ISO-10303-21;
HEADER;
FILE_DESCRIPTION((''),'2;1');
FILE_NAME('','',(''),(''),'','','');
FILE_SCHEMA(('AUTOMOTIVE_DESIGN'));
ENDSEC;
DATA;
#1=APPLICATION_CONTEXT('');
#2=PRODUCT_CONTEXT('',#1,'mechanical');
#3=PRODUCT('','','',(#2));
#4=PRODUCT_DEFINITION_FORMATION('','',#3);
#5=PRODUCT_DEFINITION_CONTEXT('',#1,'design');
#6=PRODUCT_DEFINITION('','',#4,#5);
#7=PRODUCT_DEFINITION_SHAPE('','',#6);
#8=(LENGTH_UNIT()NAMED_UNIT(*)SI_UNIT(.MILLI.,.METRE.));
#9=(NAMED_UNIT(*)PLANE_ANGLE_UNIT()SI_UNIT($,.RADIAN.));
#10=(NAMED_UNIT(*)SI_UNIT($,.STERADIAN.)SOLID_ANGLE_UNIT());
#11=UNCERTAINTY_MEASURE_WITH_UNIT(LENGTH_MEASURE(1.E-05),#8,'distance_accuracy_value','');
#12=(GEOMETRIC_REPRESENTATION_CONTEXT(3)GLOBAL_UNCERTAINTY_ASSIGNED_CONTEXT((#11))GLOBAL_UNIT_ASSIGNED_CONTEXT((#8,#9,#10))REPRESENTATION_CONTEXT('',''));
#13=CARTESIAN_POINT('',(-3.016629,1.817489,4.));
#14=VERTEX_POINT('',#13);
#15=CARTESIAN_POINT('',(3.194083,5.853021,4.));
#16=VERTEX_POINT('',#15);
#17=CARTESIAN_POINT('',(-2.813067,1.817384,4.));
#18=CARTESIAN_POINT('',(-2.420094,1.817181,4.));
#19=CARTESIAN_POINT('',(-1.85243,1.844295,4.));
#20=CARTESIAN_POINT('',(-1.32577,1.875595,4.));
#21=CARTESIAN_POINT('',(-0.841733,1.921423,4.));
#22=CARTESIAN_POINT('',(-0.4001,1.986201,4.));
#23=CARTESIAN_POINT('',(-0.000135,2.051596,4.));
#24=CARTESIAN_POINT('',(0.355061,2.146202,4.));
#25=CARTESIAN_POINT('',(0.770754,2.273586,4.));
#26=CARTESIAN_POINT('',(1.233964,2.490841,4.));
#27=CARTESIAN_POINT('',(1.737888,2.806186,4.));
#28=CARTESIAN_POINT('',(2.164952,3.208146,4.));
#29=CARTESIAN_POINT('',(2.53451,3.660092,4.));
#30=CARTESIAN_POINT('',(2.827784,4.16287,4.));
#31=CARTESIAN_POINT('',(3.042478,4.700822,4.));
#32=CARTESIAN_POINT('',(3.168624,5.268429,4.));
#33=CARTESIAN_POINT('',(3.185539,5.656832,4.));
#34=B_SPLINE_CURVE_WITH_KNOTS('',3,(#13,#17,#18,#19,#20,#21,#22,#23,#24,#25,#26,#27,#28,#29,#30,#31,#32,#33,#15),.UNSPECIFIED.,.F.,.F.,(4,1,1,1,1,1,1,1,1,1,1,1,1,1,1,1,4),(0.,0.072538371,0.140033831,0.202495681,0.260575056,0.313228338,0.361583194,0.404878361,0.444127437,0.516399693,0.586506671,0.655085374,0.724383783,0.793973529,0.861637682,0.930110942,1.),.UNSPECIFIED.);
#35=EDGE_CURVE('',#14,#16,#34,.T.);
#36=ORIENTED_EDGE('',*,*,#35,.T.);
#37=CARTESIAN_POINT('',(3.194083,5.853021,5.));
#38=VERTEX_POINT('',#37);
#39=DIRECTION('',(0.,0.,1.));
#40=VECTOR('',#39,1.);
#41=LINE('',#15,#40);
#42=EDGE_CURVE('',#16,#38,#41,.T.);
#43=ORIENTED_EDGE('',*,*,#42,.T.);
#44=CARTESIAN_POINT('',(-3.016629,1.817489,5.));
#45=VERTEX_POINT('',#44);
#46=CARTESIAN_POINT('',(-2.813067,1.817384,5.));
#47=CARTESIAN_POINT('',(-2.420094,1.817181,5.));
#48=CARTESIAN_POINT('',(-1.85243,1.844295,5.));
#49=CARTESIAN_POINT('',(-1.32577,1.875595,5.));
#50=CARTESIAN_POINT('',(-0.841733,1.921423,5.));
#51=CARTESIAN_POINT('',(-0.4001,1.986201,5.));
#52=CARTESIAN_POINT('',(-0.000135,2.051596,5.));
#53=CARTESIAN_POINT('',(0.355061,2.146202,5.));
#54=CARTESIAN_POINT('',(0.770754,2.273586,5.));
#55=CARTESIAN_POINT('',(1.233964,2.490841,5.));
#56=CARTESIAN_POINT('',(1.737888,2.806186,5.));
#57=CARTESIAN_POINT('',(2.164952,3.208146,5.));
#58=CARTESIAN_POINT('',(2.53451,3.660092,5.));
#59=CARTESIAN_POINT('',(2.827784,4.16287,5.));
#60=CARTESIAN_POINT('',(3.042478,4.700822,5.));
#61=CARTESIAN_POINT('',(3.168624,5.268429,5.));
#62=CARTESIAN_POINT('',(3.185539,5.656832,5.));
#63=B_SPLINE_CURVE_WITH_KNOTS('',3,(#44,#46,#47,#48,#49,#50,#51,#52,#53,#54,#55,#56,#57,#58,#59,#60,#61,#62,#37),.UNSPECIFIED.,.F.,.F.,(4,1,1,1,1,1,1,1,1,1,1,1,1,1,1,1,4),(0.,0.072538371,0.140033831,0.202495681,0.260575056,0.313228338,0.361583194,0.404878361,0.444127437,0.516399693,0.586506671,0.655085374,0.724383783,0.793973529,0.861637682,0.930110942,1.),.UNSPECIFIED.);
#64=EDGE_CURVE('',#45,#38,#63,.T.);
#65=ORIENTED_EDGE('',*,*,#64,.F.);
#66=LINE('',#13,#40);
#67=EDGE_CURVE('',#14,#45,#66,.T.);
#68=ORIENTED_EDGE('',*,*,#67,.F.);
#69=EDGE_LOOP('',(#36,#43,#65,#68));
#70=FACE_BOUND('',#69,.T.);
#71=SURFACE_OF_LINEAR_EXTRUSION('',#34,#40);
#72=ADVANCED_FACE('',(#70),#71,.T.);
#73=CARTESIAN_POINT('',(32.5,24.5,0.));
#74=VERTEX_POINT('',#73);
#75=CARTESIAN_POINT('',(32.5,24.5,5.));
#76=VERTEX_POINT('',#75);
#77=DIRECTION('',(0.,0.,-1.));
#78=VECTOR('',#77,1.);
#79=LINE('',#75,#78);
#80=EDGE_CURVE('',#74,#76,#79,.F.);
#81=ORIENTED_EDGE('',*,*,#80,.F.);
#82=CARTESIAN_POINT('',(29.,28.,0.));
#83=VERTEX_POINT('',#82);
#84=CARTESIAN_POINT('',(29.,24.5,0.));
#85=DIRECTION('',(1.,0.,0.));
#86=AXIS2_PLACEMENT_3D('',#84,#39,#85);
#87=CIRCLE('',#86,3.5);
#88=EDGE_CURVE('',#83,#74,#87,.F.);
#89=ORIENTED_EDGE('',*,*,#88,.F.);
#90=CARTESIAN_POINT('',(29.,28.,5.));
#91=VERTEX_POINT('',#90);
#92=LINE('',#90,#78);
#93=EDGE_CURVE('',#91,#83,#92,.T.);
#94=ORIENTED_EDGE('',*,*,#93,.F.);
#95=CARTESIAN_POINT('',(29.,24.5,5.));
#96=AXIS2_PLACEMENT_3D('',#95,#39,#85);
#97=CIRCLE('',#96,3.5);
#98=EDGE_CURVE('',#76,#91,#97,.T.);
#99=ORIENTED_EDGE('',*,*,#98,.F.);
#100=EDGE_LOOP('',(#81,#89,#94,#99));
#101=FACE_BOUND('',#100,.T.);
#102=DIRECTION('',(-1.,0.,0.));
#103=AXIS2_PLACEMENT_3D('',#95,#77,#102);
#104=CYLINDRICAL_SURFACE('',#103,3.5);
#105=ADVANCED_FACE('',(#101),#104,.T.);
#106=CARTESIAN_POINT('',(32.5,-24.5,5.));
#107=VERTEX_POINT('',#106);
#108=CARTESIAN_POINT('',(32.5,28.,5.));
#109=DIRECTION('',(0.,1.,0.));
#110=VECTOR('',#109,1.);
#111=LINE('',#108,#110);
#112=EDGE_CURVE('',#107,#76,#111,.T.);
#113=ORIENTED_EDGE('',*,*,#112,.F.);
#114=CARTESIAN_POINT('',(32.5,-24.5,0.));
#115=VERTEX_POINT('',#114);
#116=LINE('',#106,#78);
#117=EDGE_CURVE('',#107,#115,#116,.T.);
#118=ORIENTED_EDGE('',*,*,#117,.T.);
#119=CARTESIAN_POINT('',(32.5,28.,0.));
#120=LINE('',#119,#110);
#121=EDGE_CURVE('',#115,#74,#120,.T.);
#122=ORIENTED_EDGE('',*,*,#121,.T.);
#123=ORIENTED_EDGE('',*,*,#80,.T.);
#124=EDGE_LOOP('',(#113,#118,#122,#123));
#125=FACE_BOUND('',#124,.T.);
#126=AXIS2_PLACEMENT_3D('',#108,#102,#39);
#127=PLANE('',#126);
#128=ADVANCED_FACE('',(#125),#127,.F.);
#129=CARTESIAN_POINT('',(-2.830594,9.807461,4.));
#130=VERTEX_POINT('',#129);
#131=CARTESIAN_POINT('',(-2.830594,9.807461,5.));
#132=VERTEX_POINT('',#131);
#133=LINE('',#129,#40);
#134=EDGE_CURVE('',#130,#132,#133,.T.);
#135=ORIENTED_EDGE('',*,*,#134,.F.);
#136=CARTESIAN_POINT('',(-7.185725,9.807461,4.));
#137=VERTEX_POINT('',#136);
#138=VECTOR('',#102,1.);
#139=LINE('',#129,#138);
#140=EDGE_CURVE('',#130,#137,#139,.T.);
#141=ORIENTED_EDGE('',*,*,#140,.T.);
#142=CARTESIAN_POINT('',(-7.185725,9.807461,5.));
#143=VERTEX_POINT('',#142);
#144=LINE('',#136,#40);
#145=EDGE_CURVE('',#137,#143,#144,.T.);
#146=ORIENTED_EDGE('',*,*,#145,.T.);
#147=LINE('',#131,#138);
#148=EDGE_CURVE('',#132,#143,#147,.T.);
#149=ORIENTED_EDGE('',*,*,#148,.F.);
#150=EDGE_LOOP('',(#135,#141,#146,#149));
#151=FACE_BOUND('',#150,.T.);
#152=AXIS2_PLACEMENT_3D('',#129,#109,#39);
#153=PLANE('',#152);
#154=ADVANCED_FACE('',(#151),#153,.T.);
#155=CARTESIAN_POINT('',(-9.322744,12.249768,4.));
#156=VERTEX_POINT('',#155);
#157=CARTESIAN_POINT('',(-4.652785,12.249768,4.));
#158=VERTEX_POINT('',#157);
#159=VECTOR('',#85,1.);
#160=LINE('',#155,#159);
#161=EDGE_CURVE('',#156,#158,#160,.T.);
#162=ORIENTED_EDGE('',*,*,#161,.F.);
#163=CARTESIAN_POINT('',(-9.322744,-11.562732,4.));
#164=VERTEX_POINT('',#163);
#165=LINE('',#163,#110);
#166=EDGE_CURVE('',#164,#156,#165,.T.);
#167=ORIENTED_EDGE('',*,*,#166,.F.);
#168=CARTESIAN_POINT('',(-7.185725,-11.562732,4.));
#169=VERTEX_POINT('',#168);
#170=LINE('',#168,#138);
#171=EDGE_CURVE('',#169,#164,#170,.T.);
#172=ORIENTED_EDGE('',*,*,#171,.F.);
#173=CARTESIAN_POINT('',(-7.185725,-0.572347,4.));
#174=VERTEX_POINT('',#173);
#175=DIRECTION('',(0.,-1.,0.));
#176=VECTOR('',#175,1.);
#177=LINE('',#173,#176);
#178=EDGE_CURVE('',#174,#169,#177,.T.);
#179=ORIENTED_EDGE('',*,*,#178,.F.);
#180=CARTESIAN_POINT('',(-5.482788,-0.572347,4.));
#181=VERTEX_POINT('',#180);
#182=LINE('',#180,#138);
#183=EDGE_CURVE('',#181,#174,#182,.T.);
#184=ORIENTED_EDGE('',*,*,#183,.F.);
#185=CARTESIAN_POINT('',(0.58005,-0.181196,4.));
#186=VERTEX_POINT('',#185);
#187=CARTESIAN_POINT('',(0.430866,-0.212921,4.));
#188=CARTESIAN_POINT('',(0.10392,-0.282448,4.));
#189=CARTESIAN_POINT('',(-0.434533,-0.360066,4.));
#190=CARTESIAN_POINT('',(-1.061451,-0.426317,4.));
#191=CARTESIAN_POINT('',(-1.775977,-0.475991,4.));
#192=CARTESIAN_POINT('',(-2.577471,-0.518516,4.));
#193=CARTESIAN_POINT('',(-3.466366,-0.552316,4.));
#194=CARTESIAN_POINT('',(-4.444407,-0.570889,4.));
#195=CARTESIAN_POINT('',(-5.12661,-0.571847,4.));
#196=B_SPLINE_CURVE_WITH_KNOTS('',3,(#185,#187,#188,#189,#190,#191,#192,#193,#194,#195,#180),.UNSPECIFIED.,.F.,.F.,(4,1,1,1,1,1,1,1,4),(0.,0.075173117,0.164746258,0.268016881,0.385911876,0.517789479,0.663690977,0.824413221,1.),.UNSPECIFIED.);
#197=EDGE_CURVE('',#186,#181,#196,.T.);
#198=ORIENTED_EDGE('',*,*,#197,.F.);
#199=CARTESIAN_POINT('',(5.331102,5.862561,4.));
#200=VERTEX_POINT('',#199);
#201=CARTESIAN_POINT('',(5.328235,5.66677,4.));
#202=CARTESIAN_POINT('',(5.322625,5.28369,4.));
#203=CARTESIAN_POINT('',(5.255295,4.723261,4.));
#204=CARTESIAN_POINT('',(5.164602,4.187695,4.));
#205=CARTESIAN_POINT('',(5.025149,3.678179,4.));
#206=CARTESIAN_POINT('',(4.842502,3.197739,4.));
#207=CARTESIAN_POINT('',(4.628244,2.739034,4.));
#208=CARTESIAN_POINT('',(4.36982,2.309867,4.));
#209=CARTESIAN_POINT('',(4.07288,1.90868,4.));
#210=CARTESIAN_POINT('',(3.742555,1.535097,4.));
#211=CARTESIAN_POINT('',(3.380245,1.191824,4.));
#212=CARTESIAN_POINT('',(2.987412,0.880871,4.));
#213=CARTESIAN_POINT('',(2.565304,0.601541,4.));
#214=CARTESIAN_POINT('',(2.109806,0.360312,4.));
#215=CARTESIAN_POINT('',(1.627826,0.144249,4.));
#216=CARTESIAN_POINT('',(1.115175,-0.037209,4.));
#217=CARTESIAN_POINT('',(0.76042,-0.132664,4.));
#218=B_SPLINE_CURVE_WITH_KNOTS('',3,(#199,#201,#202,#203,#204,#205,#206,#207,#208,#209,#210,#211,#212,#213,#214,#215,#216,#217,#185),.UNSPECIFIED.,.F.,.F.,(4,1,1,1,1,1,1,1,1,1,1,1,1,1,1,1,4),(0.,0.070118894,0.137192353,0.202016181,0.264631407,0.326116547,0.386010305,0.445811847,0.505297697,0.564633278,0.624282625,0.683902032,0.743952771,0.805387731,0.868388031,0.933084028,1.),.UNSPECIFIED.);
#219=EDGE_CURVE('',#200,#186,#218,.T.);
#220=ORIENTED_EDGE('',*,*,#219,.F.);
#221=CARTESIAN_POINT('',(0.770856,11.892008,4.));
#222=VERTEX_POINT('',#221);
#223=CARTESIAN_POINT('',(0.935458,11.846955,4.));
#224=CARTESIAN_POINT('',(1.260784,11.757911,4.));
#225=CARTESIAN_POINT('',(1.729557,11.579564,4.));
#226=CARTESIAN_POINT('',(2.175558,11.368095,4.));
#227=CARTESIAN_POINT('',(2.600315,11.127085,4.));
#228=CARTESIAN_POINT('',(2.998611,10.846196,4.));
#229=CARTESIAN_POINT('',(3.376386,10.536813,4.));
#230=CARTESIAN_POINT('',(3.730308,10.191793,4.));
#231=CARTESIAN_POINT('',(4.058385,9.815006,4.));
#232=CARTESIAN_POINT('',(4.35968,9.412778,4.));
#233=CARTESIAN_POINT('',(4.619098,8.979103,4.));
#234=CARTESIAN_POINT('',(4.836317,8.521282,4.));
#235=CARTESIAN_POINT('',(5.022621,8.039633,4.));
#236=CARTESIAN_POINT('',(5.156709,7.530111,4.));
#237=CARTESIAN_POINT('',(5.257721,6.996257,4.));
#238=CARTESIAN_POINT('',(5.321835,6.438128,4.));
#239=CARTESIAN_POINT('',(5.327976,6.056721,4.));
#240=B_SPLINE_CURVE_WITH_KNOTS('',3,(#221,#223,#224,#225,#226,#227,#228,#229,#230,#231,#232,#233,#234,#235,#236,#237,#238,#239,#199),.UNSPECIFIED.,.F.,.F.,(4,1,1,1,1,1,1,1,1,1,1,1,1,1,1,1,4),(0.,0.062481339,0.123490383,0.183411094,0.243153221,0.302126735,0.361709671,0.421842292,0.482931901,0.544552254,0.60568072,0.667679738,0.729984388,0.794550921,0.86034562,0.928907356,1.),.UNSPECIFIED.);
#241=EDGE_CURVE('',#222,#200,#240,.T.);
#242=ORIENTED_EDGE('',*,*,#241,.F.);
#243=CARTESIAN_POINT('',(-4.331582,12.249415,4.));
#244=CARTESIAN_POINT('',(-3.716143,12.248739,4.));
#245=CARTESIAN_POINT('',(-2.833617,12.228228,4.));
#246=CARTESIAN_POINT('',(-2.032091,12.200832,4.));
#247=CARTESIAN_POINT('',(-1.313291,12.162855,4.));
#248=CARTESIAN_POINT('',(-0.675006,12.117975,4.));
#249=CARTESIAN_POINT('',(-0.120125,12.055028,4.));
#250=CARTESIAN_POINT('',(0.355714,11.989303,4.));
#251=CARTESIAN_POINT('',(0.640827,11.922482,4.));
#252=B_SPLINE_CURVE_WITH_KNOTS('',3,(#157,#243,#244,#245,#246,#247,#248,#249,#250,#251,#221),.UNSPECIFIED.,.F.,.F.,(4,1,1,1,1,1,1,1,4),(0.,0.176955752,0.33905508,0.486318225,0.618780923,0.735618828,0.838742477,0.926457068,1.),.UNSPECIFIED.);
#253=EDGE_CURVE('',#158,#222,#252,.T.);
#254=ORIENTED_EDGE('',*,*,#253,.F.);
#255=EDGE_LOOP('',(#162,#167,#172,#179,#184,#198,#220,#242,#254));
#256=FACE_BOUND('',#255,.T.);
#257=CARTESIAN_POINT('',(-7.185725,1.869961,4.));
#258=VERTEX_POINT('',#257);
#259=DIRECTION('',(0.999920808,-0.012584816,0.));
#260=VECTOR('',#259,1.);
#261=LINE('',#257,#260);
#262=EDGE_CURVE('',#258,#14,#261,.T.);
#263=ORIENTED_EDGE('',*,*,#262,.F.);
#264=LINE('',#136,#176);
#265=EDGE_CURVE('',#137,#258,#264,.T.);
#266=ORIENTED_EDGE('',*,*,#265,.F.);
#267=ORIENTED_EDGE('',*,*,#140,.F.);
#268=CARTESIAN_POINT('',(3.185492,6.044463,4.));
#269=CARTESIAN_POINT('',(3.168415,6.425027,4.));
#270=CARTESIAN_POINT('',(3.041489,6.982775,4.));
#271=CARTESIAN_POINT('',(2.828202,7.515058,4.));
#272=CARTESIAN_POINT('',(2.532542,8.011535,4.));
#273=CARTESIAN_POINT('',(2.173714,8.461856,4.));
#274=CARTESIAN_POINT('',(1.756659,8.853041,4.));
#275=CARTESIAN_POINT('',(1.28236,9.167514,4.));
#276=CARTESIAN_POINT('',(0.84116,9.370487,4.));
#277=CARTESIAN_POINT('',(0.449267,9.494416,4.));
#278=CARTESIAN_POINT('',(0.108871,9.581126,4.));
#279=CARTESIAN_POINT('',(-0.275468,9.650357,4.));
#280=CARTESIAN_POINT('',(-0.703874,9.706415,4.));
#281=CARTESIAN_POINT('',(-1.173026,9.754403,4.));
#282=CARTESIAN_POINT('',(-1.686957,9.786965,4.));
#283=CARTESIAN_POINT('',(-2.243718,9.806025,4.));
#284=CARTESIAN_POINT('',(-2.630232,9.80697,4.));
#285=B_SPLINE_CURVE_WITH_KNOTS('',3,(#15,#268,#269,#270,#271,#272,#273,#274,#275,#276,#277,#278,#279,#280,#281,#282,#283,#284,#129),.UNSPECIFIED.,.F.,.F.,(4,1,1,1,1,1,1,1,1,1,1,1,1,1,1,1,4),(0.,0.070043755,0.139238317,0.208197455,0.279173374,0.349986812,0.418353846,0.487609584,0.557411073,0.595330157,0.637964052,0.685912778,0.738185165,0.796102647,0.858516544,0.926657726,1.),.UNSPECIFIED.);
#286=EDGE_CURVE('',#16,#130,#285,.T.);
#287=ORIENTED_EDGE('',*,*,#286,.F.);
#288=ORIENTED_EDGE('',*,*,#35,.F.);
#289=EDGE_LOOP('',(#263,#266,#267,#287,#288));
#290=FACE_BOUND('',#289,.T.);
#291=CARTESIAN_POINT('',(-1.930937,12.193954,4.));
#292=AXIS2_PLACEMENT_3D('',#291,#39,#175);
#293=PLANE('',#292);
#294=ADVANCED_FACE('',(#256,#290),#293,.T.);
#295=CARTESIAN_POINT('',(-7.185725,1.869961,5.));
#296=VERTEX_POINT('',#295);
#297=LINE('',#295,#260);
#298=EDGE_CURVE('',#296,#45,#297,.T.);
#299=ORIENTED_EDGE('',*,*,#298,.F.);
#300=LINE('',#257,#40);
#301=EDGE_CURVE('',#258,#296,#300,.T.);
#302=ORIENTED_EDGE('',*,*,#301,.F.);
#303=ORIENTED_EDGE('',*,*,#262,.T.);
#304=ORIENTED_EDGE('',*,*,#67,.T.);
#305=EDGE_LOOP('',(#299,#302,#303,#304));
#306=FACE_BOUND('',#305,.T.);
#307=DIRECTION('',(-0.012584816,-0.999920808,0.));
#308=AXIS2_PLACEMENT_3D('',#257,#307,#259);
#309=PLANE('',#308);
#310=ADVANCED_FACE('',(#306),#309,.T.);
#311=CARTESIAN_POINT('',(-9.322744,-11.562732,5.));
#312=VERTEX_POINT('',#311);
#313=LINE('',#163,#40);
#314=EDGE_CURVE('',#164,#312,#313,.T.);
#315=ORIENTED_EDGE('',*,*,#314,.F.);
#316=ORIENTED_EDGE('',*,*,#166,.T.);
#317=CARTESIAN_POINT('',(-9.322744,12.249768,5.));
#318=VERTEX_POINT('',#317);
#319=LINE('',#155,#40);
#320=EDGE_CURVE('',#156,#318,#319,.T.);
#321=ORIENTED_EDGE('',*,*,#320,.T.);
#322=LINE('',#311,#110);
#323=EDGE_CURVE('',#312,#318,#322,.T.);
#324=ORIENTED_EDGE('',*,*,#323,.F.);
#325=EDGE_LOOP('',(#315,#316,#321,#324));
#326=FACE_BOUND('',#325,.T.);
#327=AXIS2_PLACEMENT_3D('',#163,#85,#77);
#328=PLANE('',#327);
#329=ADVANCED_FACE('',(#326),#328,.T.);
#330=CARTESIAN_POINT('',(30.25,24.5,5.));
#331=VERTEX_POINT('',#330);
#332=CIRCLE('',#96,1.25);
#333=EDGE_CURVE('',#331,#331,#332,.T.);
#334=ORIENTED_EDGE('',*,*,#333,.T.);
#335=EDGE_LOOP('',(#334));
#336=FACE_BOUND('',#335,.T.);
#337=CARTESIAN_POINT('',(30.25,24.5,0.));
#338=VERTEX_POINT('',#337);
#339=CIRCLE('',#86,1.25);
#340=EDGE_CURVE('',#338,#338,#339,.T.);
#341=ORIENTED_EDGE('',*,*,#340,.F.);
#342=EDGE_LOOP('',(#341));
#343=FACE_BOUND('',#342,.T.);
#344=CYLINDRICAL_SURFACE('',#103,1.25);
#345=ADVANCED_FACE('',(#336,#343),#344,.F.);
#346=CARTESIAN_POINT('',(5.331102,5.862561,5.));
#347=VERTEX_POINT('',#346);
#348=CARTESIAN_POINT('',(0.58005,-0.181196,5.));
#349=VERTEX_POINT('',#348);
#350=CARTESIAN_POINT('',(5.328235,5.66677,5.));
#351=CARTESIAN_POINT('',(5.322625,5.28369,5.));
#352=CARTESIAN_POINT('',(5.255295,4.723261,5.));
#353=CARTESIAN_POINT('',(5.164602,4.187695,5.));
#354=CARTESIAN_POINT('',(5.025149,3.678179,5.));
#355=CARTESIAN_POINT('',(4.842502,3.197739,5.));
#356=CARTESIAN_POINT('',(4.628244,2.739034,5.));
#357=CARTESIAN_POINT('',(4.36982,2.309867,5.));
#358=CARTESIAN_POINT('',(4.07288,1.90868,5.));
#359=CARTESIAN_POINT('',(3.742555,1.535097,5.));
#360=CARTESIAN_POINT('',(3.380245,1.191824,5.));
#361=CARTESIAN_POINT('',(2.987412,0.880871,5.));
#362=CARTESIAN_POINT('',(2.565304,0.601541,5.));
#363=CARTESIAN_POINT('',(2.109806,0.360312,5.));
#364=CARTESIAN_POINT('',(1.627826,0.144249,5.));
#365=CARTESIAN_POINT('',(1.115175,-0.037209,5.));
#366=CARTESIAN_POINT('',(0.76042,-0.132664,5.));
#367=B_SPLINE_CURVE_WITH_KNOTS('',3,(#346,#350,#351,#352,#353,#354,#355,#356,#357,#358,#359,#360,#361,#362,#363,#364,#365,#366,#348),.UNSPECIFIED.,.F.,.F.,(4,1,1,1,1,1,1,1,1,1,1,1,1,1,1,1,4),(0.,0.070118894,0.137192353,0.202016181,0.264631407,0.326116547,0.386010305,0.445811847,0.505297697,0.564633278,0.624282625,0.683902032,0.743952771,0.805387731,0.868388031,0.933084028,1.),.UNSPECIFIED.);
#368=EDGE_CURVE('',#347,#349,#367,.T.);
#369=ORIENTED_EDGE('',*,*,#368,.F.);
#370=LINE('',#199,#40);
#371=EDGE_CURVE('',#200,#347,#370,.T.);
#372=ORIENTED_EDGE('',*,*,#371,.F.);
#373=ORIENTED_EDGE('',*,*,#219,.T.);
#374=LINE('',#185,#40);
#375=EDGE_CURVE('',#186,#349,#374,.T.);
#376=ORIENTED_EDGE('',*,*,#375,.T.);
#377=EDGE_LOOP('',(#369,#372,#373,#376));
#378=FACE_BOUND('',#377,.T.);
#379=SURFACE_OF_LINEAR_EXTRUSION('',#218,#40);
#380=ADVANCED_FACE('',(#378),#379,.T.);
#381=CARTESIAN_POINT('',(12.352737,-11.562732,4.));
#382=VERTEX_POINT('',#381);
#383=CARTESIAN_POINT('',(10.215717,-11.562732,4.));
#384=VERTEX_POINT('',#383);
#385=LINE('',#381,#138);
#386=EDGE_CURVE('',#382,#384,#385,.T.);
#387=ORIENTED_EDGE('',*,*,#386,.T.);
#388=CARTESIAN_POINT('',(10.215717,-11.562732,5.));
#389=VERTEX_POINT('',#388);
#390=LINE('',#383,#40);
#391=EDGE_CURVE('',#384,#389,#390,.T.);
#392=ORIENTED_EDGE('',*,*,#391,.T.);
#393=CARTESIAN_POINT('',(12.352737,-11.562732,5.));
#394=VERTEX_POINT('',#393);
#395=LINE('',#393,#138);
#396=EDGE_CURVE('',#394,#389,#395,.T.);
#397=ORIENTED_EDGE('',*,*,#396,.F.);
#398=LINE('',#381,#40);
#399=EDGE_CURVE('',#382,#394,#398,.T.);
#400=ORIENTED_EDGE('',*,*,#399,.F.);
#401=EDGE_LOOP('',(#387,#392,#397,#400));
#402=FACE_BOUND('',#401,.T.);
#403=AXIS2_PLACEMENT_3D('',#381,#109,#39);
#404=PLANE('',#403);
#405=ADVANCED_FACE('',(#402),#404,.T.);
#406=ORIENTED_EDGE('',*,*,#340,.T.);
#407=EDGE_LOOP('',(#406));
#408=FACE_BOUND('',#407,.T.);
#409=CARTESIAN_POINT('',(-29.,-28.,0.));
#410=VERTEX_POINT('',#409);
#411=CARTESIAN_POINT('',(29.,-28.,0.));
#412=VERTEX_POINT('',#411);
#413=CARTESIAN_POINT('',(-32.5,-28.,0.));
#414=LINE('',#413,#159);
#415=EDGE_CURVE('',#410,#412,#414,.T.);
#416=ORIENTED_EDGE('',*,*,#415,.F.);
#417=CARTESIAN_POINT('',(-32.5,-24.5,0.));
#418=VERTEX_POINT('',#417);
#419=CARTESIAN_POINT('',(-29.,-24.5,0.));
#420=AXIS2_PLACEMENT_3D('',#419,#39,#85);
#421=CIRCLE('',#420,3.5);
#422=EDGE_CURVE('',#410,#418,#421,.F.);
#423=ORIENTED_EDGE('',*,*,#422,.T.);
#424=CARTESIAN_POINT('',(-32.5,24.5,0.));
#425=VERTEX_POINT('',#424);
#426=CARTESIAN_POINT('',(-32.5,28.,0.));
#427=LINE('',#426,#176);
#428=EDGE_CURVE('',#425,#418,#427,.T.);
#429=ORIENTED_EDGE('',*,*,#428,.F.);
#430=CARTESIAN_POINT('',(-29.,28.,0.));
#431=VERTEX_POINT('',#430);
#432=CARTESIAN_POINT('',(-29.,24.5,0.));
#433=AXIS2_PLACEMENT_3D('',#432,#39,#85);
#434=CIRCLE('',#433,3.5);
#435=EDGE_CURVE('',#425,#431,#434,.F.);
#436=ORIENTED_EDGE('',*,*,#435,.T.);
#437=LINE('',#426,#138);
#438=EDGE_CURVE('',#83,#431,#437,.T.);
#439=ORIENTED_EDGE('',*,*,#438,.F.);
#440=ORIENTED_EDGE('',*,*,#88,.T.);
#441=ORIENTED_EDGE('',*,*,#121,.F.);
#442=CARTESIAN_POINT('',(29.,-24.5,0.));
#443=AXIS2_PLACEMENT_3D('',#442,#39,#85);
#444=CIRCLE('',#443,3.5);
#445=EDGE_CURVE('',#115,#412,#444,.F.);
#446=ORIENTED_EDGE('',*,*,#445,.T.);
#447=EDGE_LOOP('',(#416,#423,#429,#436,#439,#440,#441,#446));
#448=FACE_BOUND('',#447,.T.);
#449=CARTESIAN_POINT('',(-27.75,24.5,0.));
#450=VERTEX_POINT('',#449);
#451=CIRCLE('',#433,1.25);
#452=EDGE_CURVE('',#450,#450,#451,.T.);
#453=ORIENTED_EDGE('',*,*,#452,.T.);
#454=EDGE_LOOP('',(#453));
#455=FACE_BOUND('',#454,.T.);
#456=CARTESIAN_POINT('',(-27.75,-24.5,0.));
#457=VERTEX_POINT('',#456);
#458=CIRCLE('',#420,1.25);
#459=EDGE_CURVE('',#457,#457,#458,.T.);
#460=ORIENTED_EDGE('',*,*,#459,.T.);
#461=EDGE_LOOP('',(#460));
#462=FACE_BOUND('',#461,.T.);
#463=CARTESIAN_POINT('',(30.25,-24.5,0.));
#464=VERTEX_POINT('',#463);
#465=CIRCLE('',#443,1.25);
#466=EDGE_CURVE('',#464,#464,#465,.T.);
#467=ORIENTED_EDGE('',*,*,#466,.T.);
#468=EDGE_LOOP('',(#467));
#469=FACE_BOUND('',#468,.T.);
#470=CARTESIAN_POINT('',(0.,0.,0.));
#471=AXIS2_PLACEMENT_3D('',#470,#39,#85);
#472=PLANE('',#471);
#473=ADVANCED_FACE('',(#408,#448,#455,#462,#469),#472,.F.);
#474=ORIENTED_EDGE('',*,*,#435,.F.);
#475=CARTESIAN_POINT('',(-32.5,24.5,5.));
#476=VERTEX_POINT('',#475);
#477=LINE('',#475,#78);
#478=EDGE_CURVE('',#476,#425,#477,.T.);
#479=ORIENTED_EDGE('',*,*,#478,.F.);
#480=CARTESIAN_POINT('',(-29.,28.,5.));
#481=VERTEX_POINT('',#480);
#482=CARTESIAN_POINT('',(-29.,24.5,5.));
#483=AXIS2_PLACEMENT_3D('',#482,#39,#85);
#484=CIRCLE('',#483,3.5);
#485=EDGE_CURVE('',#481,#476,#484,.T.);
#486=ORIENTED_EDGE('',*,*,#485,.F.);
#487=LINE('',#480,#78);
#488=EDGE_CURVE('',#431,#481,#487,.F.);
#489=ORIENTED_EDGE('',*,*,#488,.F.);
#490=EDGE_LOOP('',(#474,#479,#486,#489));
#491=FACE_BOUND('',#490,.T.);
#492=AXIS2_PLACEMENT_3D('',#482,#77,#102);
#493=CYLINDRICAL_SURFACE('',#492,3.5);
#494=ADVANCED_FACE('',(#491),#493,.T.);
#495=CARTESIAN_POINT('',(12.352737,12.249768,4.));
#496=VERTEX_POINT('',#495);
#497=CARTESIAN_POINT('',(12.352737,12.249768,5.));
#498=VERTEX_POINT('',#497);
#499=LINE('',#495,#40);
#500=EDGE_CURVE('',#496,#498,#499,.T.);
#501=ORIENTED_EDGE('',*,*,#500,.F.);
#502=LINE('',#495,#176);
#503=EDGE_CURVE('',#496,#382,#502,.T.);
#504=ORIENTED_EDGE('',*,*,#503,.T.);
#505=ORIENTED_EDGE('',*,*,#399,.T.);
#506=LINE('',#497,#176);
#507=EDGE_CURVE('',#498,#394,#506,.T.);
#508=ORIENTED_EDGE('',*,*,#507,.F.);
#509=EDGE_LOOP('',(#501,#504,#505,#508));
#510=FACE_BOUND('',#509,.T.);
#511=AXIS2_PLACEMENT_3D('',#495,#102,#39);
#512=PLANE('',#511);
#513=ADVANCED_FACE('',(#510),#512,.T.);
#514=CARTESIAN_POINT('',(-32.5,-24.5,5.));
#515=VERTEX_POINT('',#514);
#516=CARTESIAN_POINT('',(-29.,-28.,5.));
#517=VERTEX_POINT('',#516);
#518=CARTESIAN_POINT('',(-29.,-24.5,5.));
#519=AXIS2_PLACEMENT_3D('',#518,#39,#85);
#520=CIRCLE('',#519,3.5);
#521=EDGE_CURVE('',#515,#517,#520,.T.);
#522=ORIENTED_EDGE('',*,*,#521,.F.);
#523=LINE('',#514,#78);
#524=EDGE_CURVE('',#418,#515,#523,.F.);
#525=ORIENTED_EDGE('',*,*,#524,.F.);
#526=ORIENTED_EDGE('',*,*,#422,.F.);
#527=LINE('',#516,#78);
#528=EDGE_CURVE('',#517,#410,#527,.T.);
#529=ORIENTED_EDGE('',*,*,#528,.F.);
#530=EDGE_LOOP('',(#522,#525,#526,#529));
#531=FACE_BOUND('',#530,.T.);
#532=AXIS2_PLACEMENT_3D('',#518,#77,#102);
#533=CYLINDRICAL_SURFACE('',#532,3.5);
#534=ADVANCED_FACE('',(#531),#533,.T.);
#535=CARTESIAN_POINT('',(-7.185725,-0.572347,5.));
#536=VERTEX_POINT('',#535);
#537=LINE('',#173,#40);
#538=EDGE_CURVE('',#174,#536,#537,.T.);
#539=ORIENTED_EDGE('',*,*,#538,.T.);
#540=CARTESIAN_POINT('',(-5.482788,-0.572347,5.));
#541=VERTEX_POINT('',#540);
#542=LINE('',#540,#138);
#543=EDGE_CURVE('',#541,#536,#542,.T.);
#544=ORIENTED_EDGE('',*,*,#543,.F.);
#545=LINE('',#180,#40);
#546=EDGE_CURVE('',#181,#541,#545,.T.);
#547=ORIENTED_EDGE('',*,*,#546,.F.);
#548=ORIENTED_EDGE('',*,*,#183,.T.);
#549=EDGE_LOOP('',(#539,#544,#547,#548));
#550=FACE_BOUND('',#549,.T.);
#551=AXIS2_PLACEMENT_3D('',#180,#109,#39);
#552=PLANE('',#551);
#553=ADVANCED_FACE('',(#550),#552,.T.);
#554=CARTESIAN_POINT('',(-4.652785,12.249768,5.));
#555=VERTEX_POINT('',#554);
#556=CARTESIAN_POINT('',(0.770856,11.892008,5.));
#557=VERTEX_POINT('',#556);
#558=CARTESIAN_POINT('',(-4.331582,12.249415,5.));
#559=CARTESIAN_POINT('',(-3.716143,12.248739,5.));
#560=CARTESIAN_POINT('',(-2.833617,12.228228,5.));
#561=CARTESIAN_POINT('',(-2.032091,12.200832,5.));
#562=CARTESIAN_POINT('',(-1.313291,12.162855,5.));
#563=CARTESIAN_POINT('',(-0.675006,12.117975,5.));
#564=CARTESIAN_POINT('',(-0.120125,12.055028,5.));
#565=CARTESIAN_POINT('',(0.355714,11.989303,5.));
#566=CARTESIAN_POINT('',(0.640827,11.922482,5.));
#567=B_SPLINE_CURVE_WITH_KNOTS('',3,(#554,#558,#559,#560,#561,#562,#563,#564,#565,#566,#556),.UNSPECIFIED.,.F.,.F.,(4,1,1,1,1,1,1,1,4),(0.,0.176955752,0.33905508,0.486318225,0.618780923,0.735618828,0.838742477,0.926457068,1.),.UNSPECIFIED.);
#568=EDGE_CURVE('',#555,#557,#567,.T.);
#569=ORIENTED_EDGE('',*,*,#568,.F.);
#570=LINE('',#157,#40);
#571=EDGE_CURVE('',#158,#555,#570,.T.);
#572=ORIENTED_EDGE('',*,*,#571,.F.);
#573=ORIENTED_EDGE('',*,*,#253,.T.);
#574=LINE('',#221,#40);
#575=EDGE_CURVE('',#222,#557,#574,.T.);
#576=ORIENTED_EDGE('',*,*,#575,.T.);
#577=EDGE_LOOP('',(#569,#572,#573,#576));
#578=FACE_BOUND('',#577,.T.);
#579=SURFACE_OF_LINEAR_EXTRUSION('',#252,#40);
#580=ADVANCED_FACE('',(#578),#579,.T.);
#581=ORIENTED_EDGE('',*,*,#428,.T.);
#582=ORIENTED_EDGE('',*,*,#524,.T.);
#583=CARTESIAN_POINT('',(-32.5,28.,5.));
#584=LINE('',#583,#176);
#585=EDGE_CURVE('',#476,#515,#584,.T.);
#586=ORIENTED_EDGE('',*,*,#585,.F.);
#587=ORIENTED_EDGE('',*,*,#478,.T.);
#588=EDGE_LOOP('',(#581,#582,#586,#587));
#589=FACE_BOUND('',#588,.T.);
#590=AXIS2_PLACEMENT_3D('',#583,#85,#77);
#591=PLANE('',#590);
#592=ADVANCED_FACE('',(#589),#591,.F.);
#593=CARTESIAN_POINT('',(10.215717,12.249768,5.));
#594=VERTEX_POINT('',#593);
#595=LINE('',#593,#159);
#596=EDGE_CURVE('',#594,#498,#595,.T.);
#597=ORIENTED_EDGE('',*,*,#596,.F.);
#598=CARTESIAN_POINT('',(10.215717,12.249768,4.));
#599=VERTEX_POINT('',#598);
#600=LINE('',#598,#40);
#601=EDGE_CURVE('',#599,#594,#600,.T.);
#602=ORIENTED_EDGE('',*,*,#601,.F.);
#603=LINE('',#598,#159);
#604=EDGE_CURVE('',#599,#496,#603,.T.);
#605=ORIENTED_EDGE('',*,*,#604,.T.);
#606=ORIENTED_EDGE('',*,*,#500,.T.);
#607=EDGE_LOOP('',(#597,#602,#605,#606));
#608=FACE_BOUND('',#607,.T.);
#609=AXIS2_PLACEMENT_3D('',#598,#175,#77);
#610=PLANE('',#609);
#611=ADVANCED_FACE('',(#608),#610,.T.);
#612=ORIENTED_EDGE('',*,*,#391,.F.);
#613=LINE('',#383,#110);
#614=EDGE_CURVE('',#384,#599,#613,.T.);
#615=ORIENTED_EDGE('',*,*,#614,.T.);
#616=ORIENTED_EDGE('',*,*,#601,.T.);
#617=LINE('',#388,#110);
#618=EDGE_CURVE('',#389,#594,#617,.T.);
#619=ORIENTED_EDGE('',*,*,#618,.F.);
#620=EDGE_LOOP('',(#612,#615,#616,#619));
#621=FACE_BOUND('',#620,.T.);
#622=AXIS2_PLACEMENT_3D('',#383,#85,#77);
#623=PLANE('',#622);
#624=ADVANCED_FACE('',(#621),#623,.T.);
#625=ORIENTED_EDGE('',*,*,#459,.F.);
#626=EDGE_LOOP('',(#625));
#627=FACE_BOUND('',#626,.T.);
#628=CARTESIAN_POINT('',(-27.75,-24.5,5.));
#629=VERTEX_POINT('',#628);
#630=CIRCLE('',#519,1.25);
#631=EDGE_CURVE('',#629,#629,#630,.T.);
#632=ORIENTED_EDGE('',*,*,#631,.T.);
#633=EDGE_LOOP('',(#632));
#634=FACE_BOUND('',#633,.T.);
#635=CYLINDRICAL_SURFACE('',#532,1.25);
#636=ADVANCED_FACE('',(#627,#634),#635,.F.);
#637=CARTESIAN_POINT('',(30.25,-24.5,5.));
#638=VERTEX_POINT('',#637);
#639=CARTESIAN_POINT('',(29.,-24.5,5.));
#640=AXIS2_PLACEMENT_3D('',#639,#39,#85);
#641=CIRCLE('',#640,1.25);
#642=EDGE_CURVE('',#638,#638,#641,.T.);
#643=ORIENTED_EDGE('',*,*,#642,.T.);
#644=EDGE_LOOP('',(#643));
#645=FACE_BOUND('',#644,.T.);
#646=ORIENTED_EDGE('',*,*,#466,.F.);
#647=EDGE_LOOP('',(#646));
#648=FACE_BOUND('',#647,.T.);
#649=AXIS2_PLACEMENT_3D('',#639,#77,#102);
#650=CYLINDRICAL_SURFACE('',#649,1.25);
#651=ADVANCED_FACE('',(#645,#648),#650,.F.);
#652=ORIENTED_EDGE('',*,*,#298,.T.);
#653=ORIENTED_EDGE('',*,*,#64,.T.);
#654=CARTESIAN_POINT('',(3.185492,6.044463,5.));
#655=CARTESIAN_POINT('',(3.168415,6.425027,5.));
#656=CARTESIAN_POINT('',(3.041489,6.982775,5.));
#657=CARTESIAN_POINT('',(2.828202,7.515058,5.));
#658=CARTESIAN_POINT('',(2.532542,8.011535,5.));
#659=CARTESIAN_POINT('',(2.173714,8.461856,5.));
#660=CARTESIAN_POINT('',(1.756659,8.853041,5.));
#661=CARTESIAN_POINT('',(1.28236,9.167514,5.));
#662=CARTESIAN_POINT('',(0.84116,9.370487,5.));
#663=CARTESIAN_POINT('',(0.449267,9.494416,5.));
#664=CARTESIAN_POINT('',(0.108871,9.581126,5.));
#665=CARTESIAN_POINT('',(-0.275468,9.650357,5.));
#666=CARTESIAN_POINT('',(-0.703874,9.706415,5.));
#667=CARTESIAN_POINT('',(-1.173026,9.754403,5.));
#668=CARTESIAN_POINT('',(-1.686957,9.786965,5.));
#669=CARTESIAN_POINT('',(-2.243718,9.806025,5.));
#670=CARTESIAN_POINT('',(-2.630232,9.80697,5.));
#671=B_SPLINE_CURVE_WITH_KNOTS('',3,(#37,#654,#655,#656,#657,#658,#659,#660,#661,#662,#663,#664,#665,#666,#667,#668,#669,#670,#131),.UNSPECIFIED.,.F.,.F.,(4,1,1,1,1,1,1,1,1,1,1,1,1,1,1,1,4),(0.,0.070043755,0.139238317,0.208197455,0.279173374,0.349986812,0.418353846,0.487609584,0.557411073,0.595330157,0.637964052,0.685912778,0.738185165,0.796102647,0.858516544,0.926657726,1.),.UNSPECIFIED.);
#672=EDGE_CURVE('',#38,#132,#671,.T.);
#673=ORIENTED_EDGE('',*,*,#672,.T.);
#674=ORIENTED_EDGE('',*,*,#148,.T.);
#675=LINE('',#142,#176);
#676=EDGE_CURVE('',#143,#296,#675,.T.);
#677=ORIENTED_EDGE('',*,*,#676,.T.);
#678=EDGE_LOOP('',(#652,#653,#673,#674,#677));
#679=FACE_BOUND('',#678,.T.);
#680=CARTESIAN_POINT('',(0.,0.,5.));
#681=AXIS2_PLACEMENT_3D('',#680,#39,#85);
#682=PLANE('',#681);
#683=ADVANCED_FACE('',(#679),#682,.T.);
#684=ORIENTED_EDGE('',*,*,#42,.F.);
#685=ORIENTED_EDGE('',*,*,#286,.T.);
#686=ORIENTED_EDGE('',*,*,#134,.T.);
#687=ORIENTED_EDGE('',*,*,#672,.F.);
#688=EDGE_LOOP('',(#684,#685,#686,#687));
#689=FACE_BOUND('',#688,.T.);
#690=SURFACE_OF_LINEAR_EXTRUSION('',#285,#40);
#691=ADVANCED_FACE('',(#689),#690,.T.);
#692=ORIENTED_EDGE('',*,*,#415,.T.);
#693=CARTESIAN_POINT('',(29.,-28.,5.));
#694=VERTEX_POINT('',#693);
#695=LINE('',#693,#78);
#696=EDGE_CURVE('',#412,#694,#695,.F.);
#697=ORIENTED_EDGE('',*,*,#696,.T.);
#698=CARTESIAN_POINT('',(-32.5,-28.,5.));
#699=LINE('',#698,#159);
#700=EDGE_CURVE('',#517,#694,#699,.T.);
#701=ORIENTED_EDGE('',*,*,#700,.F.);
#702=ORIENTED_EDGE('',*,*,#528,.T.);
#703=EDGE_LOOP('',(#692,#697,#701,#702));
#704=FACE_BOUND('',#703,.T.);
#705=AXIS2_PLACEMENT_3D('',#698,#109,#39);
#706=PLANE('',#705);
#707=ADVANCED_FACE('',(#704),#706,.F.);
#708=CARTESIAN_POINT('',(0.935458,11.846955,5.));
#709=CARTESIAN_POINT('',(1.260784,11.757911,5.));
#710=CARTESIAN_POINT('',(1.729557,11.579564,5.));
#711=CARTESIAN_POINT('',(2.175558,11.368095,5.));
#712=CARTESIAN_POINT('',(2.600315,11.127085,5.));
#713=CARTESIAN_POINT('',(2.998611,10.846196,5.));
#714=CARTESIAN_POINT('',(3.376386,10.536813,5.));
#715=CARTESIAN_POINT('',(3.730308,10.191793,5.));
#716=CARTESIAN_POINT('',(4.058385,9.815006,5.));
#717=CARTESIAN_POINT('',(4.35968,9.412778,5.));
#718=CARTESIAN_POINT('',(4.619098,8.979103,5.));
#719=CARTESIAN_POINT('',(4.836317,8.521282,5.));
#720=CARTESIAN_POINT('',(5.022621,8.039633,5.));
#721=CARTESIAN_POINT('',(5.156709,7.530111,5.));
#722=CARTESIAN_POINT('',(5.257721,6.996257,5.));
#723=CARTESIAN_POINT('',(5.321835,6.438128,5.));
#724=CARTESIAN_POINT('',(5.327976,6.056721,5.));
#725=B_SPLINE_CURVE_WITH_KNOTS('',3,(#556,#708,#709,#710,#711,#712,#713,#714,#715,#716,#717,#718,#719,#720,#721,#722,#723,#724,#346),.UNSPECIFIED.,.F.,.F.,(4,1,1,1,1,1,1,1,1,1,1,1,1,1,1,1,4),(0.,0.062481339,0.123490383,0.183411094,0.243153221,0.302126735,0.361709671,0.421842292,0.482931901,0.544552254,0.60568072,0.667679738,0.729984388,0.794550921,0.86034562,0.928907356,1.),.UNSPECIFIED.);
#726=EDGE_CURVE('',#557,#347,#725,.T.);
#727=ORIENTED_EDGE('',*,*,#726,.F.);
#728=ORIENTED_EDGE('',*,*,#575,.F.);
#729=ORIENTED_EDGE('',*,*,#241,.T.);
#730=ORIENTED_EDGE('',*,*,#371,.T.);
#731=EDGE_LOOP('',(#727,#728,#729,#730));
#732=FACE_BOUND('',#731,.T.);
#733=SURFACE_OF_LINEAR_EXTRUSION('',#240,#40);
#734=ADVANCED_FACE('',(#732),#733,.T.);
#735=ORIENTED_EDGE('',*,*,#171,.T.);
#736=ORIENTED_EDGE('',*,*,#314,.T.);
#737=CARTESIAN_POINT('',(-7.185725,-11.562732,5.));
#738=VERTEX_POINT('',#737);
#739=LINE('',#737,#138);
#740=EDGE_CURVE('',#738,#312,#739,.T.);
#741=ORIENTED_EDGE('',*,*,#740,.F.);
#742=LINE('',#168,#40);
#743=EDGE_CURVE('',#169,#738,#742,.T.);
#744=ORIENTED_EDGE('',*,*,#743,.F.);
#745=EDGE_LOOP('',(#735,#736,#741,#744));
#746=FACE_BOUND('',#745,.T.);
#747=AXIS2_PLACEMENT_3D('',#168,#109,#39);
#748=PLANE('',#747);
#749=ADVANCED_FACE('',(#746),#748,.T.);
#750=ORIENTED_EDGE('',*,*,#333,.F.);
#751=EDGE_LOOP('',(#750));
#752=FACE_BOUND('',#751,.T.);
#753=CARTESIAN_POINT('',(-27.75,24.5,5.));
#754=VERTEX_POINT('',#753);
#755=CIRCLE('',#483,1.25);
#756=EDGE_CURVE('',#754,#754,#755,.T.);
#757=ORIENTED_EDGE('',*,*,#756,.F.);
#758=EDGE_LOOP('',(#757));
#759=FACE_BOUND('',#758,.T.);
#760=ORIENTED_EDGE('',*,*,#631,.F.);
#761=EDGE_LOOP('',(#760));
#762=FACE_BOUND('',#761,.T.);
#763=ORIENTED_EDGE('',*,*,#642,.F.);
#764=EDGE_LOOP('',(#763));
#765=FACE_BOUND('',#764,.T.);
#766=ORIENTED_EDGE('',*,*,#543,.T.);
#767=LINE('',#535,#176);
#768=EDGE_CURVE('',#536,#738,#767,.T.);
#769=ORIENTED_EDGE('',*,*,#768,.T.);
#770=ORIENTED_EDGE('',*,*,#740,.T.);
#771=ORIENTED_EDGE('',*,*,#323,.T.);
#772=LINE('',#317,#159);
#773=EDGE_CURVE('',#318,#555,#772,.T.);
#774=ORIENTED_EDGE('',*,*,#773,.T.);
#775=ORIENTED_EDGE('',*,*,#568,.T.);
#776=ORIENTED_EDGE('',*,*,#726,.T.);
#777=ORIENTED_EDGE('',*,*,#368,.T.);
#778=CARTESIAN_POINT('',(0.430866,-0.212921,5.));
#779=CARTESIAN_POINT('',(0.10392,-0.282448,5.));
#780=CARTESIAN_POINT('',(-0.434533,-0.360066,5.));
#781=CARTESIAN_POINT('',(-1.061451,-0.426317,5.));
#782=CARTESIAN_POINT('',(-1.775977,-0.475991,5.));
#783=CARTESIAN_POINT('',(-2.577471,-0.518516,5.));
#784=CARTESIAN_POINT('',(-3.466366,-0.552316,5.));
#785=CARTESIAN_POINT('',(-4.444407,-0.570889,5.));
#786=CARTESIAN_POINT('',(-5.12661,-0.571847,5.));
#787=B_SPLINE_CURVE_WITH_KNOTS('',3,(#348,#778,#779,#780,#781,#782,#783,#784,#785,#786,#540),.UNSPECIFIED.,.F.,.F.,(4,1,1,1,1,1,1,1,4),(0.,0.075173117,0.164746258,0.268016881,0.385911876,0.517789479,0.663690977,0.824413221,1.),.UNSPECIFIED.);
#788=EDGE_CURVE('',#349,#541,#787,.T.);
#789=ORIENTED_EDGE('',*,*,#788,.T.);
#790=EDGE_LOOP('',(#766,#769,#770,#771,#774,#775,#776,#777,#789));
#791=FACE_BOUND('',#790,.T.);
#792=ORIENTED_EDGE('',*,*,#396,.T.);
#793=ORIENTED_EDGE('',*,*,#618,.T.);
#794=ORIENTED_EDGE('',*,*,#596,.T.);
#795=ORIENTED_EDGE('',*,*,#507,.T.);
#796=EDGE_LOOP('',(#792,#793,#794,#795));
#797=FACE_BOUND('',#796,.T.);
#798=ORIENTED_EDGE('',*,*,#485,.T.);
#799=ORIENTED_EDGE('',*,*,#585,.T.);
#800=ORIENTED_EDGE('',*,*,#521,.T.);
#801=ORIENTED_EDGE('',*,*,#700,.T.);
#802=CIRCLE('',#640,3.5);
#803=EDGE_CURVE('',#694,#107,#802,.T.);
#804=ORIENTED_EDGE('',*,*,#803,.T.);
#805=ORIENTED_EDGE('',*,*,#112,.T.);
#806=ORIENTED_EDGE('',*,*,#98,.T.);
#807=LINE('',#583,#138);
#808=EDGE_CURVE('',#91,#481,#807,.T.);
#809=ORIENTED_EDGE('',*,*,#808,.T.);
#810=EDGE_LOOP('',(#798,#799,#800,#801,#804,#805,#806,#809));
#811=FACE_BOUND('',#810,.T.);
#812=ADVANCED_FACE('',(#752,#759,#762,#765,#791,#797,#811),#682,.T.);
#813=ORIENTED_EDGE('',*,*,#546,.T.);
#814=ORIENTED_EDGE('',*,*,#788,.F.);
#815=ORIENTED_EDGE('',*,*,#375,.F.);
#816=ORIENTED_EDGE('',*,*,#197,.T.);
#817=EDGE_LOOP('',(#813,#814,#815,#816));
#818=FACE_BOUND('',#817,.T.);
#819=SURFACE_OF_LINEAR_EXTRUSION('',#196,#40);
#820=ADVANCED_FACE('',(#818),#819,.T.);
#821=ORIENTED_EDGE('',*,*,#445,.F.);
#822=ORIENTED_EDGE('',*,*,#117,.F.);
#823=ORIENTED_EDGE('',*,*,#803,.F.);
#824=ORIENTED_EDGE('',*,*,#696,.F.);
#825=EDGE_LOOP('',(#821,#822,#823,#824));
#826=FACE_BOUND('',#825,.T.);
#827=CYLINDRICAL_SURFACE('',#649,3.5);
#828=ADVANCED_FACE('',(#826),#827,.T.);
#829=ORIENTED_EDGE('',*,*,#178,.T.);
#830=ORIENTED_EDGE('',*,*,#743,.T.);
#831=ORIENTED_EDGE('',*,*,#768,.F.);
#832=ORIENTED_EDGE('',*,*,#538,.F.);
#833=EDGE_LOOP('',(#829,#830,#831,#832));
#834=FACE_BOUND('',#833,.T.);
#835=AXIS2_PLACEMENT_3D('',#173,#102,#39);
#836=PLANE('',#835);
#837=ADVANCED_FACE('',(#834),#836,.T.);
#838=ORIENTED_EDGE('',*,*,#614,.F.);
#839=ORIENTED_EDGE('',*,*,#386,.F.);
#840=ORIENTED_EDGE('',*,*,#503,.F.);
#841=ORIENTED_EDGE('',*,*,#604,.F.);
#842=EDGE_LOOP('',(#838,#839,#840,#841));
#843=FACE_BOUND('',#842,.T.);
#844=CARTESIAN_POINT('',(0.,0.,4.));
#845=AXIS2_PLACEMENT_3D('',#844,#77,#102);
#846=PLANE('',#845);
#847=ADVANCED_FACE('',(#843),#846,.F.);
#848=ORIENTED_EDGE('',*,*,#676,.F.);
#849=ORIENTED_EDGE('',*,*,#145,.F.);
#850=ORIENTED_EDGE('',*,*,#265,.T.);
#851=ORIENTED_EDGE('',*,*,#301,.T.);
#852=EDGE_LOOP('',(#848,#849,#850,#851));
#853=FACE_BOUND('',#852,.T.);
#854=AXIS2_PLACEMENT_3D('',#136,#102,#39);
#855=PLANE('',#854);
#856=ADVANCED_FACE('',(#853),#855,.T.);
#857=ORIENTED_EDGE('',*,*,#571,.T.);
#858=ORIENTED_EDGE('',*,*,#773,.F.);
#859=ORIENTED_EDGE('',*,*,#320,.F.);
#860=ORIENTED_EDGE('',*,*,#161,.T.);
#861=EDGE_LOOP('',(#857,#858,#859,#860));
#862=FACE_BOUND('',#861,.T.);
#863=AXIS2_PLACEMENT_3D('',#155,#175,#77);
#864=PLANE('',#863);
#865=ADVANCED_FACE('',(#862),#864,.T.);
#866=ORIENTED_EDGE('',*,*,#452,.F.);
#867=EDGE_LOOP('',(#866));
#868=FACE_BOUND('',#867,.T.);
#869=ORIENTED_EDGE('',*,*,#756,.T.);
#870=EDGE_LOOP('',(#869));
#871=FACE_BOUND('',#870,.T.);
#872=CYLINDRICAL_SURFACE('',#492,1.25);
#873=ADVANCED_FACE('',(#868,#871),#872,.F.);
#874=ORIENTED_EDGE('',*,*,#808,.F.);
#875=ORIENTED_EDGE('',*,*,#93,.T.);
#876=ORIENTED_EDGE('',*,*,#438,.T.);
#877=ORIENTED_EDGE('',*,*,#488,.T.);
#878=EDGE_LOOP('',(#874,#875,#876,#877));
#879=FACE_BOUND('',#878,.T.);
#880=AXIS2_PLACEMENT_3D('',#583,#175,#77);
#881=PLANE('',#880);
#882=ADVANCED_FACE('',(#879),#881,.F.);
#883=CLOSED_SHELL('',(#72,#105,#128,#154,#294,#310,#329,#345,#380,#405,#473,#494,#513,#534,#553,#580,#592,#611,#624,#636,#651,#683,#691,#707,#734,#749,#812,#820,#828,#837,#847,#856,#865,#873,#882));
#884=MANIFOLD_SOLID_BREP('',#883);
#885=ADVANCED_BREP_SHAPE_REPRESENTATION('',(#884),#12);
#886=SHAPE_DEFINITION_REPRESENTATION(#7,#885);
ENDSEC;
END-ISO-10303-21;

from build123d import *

# Parameters (mm, degrees)
BOSS_EXTRU_1_OUTLINE_W  = 65
BOSS_EXTRU_1_OUTLINE_H  = 56
BOSS_EXTRU_1_OUTLINE_R  = 1.25
BOSS_EXTRU_1_DEPTH      = 5
CONG_3_R                = 3.5
ESQUISSE2_W             = 2.137019231
ESQUISSE2_H             = 23.8125
ENL_V_MAT_EXTRU_1_DEPTH = 1


# Read off the part's stored shape, not the designer's step: Boss.-Extru.1
with BuildPart() as part:
    # Boss.-Extru.1 outline → Boss.-Extru.1 (new body)
    with BuildSketch(Plane.XY):
        Rectangle(BOSS_EXTRU_1_OUTLINE_W, BOSS_EXTRU_1_OUTLINE_H)
        with Locations((-29, -24.5)):
            Circle(BOSS_EXTRU_1_OUTLINE_R, mode=Mode.SUBTRACT)
        with Locations((29, -24.5)):
            Circle(BOSS_EXTRU_1_OUTLINE_R, mode=Mode.SUBTRACT)
        with Locations((-29, 24.5)):
            Circle(BOSS_EXTRU_1_OUTLINE_R, mode=Mode.SUBTRACT)
        with Locations((29, 24.5)):
            Circle(BOSS_EXTRU_1_OUTLINE_R, mode=Mode.SUBTRACT)
    extrude(amount=BOSS_EXTRU_1_DEPTH)

    # Congé3
    cong_3_edges = [part.edges().sort_by_distance(p)[0] for p in [
        (-32.5, 28, 2.5),
        (32.5, 28, 2.5),
        (32.5, -28, 2.5),
        (-32.5, -28, 2.5),
    ]]
    fillet(cong_3_edges, radius=CONG_3_R)

    # Esquisse2 → Enlèv. mat.-Extru.1 (cut)
    # profile 1 of 2: a face of its own
    with BuildSketch(Plane.XY.offset(5)):
        with BuildLine():
            Line((-9.322744099, 12.249768252), (-4.652784664, 12.249768252))
            add(Edge.make_bspline(
                [(-4.652784664, 12.249768252), (-4.331581892, 12.249415172), (-3.716143116, 12.248738655), (-2.833617469, 12.228227617), (-2.032090545, 12.20083173), (-1.313290632, 12.16285492), (-0.675006107, 12.117974548), (-0.120125194, 12.055027637), (0.355713573, 11.989303126), (0.640827095, 11.922482485), (0.77085566, 11.892008336)],
                knots=[0, 0, 0, 0, 1.415646017, 2.712440637, 3.8905458, 4.950247383, 5.884950622, 6.709939814, 7.411656543, 8, 8, 8, 8], degree=3))
            add(Edge.make_bspline(
                [(0.77085566, 11.892008336), (0.935458095, 11.846955427), (1.260784315, 11.757911225), (1.729557484, 11.579564285), (2.175557754, 11.368094554), (2.600315321, 11.127085249), (2.998610565, 10.846195964), (3.376385951, 10.536812958), (3.730307602, 10.191793179), (4.058385286, 9.815006359), (4.35968007, 9.412777789), (4.61909809, 8.979102974), (4.83631726, 8.521281785), (5.022621303, 8.039632667), (5.156709181, 7.530111002), (5.257721123, 6.996257119), (5.321835447, 6.438128245), (5.32797609, 6.056720932), (5.331102055, 5.86256122)],
                knots=[0, 0, 0, 0, 0.999701418, 1.975846123, 2.934577507, 3.890451536, 4.834027766, 5.787354733, 6.749476667, 7.726910423, 8.712836071, 9.690891519, 10.682875813, 11.679750201, 12.712814741, 13.765529915, 14.8625177, 16, 16, 16, 16], degree=3))
            add(Edge.make_bspline(
                [(5.331102055, 5.86256122), (5.328234861, 5.66676956), (5.322625004, 5.283689954), (5.25529492, 4.723260806), (5.164602009, 4.187694616), (5.025148849, 3.67817889), (4.842502395, 3.197739452), (4.628243964, 2.739034284), (4.369820302, 2.309867231), (4.072879586, 1.908680234), (3.742555345, 1.535096724), (3.380245177, 1.191823926), (2.987411776, 0.880871195), (2.56530359, 0.601541428), (2.109805511, 0.360312098), (1.627825859, 0.144249005), (1.11517528, -0.037209461), (0.760419961, -0.132663986), (0.580050372, -0.181196292)],
                knots=[0, 0, 0, 0, 1.121902311, 2.195077645, 3.232258892, 4.234102512, 5.217864754, 6.176164875, 7.132989551, 8.084763148, 9.034132444, 9.988522005, 10.94243251, 11.903244335, 12.886203696, 13.894208494, 14.929344452, 16, 16, 16, 16], degree=3))
            add(Edge.make_bspline(
                [(0.580050372, -0.181196292), (0.430866189, -0.212921216), (0.103920378, -0.282448234), (-0.434532786, -0.360066485), (-1.061450501, -0.426316947), (-1.775977084, -0.475990758), (-2.577471169, -0.518515586), (-3.466366331, -0.552316368), (-4.444407463, -0.570889123), (-5.126610034, -0.571847017), (-5.482787669, -0.572347133)],
                knots=[0, 0, 0, 0, 0.601384939, 1.31797006, 2.144135048, 3.087295005, 4.142315834, 5.309527816, 6.595305764, 8, 8, 8, 8], degree=3))
            Line((-5.482787669, -0.572347133), (-7.185724869, -0.572347133))
            Line((-7.185724869, -0.572347133), (-7.185724869, -11.562731748))
            Line((-7.185724869, -11.562731748), (-9.322744099, -11.562731748))
            Line((-9.322744099, -11.562731748), (-9.322744099, 12.249768252))
        make_face()
        with BuildLine():
            Line((-7.185724869, 9.807460559), (-7.185724869, 1.869960559))
            Line((-7.185724869, 1.869960559), (-3.016629316, 1.817489105))
            add(Edge.make_bspline(
                [(-3.016629316, 1.817489105), (-2.813066963, 1.817383897), (-2.420094039, 1.817180796), (-1.852429734, 1.844294549), (-1.325770119, 1.875594601), (-0.841732919, 1.921422938), (-0.400099936, 1.986201493), (-0.000134784, 2.051595639), (0.355061194, 2.146201766), (0.770753978, 2.273585505), (1.233963895, 2.490841336), (1.737887752, 2.806186124), (2.16495192, 3.208145942), (2.534510332, 3.660092437), (2.827784252, 4.162870443), (3.042477699, 4.700821602), (3.168623788, 5.268428935), (3.185538784, 5.656832166), (3.194082824, 5.853020956)],
                knots=[0, 0, 0, 0, 1.160613943, 2.240541288, 3.23993089, 4.169200891, 5.011653406, 5.7853311, 6.478053781, 7.106038997, 8.262395093, 9.384106736, 10.481365981, 11.59014053, 12.70357646, 13.786202915, 14.881775077, 16, 16, 16, 16], degree=3))
            add(Edge.make_bspline(
                [(3.194082824, 5.853020956), (3.185492318, 6.044463342), (3.168415456, 6.425027112), (3.041488959, 6.982775465), (2.828201662, 7.515057668), (2.532541618, 8.011535267), (2.173713573, 8.461855522), (1.756659113, 8.853041333), (1.28235996, 9.167513989), (0.841160389, 9.370486852), (0.449266605, 9.49441578), (0.108870592, 9.581126212), (-0.275467747, 9.650356676), (-0.703873532, 9.706414722), (-1.173026277, 9.754403449), (-1.686956598, 9.786965187), (-2.243717635, 9.806025094), (-2.630232412, 9.806970487), (-2.830594159, 9.807460559)],
                knots=[0, 0, 0, 0, 1.120700087, 2.227813068, 3.331159281, 4.466773991, 5.599788987, 6.693661531, 7.80175334, 8.91857717, 9.525282508, 10.207424825, 10.974604443, 11.810962634, 12.737642355, 13.736264703, 14.826523623, 16, 16, 16, 16], degree=3))
            Line((-2.830594159, 9.807460559), (-7.185724869, 9.807460559))
        make_face(mode=Mode.SUBTRACT)
    # profile 2 of 2: a face of its own
    with BuildSketch(Plane.XY.offset(5)):
        with Locations((11.284227055, 0.343518252)):
            Rectangle(ESQUISSE2_W, ESQUISSE2_H)
    extrude(amount=-ENL_V_MAT_EXTRU_1_DEPTH, mode=Mode.SUBTRACT)


solid = part.part
